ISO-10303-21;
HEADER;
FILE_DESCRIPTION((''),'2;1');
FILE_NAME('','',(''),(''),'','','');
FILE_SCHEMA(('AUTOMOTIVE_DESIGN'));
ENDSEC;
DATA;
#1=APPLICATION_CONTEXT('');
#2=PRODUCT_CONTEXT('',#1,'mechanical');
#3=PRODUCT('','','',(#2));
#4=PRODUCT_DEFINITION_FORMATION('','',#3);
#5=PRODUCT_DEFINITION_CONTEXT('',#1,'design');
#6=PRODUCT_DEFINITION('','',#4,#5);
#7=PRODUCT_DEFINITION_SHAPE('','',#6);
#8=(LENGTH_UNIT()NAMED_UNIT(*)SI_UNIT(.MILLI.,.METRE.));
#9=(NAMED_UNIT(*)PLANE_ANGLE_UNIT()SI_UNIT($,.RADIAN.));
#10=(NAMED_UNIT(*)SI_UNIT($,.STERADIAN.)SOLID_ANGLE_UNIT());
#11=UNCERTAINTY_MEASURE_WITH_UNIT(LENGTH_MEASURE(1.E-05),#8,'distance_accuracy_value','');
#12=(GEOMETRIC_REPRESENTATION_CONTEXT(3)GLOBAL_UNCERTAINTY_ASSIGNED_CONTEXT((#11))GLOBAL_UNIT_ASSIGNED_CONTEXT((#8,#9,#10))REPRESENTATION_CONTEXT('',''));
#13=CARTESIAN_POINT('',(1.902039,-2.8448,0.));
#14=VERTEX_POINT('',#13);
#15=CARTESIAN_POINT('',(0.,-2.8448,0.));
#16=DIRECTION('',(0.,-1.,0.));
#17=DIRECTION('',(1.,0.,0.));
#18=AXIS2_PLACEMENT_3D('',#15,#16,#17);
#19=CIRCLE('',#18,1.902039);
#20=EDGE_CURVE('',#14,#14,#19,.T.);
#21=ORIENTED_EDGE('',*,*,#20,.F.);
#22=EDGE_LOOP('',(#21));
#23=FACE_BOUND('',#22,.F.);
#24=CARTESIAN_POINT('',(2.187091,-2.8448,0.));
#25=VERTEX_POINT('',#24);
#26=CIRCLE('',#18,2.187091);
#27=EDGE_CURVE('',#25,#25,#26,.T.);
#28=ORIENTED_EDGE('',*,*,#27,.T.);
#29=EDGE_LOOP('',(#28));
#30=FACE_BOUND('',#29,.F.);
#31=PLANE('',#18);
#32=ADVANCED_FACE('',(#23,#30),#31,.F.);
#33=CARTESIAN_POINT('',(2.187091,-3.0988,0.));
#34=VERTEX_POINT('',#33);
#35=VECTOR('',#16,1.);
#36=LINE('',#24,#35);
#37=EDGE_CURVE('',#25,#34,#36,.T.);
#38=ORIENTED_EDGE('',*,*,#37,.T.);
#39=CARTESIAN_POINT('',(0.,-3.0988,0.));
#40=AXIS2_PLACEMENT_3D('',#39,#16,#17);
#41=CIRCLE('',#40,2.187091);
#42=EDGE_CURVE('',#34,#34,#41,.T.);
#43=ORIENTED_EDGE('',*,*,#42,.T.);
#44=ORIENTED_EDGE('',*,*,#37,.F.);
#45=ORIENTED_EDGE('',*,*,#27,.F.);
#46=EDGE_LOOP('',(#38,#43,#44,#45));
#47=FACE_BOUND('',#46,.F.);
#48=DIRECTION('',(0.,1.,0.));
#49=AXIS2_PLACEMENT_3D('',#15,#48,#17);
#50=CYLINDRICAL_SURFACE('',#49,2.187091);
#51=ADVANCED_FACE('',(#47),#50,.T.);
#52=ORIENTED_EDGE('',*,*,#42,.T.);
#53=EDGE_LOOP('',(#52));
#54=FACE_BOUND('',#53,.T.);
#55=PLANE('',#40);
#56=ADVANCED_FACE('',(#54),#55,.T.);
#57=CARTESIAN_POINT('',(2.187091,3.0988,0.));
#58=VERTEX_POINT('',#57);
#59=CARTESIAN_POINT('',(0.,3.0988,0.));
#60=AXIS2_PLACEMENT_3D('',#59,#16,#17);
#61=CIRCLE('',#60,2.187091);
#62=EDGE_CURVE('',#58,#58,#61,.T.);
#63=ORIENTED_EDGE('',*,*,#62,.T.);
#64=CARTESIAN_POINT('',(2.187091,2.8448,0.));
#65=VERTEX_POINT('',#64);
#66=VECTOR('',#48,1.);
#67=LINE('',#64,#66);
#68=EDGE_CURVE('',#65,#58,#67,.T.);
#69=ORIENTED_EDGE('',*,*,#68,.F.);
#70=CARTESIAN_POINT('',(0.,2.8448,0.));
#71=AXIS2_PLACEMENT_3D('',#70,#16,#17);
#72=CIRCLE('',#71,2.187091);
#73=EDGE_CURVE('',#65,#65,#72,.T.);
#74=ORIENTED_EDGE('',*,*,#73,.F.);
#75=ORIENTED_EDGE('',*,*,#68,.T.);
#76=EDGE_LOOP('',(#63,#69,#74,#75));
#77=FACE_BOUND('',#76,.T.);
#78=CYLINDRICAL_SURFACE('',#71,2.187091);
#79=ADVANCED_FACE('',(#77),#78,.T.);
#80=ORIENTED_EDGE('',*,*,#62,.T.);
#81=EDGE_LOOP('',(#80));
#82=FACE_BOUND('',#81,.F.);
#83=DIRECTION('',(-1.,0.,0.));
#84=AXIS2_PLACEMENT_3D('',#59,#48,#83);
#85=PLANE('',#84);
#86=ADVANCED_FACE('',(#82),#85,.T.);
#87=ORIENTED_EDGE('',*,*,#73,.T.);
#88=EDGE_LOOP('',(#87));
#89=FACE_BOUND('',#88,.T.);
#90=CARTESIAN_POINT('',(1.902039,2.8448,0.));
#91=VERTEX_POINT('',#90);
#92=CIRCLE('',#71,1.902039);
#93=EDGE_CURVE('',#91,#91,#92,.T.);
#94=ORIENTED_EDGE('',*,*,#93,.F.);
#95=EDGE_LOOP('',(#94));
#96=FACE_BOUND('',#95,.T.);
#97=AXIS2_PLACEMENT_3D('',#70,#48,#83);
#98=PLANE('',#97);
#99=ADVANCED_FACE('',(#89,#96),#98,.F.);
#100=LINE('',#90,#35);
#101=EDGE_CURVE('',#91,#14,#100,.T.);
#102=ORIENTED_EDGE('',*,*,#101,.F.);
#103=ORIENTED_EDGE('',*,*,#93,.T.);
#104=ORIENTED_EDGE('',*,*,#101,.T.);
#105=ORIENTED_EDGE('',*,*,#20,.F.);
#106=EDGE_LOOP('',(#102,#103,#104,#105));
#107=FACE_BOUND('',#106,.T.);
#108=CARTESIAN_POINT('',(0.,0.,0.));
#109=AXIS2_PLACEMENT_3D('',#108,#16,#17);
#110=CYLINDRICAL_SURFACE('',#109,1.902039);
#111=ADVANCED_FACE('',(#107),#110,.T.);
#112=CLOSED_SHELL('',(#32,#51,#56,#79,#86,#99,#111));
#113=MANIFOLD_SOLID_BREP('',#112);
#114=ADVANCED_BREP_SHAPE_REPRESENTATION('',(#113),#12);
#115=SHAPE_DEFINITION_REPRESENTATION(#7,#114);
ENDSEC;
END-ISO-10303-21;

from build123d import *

# Parameters (mm, degrees)
F0_R          = 1.9020393282
F1_DEPTH      = 2.8448
F1_DEPTH_BACK = 2.8448
F2_R          = 2.1870906788
F3_DEPTH      = 0.254


# Not quite as in the source:
# - a pattern or mirror of a feature is missing from the dataset's text; its kind, count and spacing are read off the source's solid


with BuildPart() as f1:
    # F0 (on Front) → F1 (new body, two sides)
    with BuildSketch(Plane.XZ) as f1_sk:
        Circle(F0_R)
    extrude(amount=F1_DEPTH)
    extrude(f1_sk.sketch, amount=-F1_DEPTH_BACK)

    # F2 (on face) → F3 (join)
    with BuildSketch(Plane.XZ.offset(2.8448)):
        Circle(F2_R)
    f3 = extrude(amount=F3_DEPTH)

    # F3_copies: F3 across plane
    add(f3.mirror(Plane.ZX))


solid = f1.part
